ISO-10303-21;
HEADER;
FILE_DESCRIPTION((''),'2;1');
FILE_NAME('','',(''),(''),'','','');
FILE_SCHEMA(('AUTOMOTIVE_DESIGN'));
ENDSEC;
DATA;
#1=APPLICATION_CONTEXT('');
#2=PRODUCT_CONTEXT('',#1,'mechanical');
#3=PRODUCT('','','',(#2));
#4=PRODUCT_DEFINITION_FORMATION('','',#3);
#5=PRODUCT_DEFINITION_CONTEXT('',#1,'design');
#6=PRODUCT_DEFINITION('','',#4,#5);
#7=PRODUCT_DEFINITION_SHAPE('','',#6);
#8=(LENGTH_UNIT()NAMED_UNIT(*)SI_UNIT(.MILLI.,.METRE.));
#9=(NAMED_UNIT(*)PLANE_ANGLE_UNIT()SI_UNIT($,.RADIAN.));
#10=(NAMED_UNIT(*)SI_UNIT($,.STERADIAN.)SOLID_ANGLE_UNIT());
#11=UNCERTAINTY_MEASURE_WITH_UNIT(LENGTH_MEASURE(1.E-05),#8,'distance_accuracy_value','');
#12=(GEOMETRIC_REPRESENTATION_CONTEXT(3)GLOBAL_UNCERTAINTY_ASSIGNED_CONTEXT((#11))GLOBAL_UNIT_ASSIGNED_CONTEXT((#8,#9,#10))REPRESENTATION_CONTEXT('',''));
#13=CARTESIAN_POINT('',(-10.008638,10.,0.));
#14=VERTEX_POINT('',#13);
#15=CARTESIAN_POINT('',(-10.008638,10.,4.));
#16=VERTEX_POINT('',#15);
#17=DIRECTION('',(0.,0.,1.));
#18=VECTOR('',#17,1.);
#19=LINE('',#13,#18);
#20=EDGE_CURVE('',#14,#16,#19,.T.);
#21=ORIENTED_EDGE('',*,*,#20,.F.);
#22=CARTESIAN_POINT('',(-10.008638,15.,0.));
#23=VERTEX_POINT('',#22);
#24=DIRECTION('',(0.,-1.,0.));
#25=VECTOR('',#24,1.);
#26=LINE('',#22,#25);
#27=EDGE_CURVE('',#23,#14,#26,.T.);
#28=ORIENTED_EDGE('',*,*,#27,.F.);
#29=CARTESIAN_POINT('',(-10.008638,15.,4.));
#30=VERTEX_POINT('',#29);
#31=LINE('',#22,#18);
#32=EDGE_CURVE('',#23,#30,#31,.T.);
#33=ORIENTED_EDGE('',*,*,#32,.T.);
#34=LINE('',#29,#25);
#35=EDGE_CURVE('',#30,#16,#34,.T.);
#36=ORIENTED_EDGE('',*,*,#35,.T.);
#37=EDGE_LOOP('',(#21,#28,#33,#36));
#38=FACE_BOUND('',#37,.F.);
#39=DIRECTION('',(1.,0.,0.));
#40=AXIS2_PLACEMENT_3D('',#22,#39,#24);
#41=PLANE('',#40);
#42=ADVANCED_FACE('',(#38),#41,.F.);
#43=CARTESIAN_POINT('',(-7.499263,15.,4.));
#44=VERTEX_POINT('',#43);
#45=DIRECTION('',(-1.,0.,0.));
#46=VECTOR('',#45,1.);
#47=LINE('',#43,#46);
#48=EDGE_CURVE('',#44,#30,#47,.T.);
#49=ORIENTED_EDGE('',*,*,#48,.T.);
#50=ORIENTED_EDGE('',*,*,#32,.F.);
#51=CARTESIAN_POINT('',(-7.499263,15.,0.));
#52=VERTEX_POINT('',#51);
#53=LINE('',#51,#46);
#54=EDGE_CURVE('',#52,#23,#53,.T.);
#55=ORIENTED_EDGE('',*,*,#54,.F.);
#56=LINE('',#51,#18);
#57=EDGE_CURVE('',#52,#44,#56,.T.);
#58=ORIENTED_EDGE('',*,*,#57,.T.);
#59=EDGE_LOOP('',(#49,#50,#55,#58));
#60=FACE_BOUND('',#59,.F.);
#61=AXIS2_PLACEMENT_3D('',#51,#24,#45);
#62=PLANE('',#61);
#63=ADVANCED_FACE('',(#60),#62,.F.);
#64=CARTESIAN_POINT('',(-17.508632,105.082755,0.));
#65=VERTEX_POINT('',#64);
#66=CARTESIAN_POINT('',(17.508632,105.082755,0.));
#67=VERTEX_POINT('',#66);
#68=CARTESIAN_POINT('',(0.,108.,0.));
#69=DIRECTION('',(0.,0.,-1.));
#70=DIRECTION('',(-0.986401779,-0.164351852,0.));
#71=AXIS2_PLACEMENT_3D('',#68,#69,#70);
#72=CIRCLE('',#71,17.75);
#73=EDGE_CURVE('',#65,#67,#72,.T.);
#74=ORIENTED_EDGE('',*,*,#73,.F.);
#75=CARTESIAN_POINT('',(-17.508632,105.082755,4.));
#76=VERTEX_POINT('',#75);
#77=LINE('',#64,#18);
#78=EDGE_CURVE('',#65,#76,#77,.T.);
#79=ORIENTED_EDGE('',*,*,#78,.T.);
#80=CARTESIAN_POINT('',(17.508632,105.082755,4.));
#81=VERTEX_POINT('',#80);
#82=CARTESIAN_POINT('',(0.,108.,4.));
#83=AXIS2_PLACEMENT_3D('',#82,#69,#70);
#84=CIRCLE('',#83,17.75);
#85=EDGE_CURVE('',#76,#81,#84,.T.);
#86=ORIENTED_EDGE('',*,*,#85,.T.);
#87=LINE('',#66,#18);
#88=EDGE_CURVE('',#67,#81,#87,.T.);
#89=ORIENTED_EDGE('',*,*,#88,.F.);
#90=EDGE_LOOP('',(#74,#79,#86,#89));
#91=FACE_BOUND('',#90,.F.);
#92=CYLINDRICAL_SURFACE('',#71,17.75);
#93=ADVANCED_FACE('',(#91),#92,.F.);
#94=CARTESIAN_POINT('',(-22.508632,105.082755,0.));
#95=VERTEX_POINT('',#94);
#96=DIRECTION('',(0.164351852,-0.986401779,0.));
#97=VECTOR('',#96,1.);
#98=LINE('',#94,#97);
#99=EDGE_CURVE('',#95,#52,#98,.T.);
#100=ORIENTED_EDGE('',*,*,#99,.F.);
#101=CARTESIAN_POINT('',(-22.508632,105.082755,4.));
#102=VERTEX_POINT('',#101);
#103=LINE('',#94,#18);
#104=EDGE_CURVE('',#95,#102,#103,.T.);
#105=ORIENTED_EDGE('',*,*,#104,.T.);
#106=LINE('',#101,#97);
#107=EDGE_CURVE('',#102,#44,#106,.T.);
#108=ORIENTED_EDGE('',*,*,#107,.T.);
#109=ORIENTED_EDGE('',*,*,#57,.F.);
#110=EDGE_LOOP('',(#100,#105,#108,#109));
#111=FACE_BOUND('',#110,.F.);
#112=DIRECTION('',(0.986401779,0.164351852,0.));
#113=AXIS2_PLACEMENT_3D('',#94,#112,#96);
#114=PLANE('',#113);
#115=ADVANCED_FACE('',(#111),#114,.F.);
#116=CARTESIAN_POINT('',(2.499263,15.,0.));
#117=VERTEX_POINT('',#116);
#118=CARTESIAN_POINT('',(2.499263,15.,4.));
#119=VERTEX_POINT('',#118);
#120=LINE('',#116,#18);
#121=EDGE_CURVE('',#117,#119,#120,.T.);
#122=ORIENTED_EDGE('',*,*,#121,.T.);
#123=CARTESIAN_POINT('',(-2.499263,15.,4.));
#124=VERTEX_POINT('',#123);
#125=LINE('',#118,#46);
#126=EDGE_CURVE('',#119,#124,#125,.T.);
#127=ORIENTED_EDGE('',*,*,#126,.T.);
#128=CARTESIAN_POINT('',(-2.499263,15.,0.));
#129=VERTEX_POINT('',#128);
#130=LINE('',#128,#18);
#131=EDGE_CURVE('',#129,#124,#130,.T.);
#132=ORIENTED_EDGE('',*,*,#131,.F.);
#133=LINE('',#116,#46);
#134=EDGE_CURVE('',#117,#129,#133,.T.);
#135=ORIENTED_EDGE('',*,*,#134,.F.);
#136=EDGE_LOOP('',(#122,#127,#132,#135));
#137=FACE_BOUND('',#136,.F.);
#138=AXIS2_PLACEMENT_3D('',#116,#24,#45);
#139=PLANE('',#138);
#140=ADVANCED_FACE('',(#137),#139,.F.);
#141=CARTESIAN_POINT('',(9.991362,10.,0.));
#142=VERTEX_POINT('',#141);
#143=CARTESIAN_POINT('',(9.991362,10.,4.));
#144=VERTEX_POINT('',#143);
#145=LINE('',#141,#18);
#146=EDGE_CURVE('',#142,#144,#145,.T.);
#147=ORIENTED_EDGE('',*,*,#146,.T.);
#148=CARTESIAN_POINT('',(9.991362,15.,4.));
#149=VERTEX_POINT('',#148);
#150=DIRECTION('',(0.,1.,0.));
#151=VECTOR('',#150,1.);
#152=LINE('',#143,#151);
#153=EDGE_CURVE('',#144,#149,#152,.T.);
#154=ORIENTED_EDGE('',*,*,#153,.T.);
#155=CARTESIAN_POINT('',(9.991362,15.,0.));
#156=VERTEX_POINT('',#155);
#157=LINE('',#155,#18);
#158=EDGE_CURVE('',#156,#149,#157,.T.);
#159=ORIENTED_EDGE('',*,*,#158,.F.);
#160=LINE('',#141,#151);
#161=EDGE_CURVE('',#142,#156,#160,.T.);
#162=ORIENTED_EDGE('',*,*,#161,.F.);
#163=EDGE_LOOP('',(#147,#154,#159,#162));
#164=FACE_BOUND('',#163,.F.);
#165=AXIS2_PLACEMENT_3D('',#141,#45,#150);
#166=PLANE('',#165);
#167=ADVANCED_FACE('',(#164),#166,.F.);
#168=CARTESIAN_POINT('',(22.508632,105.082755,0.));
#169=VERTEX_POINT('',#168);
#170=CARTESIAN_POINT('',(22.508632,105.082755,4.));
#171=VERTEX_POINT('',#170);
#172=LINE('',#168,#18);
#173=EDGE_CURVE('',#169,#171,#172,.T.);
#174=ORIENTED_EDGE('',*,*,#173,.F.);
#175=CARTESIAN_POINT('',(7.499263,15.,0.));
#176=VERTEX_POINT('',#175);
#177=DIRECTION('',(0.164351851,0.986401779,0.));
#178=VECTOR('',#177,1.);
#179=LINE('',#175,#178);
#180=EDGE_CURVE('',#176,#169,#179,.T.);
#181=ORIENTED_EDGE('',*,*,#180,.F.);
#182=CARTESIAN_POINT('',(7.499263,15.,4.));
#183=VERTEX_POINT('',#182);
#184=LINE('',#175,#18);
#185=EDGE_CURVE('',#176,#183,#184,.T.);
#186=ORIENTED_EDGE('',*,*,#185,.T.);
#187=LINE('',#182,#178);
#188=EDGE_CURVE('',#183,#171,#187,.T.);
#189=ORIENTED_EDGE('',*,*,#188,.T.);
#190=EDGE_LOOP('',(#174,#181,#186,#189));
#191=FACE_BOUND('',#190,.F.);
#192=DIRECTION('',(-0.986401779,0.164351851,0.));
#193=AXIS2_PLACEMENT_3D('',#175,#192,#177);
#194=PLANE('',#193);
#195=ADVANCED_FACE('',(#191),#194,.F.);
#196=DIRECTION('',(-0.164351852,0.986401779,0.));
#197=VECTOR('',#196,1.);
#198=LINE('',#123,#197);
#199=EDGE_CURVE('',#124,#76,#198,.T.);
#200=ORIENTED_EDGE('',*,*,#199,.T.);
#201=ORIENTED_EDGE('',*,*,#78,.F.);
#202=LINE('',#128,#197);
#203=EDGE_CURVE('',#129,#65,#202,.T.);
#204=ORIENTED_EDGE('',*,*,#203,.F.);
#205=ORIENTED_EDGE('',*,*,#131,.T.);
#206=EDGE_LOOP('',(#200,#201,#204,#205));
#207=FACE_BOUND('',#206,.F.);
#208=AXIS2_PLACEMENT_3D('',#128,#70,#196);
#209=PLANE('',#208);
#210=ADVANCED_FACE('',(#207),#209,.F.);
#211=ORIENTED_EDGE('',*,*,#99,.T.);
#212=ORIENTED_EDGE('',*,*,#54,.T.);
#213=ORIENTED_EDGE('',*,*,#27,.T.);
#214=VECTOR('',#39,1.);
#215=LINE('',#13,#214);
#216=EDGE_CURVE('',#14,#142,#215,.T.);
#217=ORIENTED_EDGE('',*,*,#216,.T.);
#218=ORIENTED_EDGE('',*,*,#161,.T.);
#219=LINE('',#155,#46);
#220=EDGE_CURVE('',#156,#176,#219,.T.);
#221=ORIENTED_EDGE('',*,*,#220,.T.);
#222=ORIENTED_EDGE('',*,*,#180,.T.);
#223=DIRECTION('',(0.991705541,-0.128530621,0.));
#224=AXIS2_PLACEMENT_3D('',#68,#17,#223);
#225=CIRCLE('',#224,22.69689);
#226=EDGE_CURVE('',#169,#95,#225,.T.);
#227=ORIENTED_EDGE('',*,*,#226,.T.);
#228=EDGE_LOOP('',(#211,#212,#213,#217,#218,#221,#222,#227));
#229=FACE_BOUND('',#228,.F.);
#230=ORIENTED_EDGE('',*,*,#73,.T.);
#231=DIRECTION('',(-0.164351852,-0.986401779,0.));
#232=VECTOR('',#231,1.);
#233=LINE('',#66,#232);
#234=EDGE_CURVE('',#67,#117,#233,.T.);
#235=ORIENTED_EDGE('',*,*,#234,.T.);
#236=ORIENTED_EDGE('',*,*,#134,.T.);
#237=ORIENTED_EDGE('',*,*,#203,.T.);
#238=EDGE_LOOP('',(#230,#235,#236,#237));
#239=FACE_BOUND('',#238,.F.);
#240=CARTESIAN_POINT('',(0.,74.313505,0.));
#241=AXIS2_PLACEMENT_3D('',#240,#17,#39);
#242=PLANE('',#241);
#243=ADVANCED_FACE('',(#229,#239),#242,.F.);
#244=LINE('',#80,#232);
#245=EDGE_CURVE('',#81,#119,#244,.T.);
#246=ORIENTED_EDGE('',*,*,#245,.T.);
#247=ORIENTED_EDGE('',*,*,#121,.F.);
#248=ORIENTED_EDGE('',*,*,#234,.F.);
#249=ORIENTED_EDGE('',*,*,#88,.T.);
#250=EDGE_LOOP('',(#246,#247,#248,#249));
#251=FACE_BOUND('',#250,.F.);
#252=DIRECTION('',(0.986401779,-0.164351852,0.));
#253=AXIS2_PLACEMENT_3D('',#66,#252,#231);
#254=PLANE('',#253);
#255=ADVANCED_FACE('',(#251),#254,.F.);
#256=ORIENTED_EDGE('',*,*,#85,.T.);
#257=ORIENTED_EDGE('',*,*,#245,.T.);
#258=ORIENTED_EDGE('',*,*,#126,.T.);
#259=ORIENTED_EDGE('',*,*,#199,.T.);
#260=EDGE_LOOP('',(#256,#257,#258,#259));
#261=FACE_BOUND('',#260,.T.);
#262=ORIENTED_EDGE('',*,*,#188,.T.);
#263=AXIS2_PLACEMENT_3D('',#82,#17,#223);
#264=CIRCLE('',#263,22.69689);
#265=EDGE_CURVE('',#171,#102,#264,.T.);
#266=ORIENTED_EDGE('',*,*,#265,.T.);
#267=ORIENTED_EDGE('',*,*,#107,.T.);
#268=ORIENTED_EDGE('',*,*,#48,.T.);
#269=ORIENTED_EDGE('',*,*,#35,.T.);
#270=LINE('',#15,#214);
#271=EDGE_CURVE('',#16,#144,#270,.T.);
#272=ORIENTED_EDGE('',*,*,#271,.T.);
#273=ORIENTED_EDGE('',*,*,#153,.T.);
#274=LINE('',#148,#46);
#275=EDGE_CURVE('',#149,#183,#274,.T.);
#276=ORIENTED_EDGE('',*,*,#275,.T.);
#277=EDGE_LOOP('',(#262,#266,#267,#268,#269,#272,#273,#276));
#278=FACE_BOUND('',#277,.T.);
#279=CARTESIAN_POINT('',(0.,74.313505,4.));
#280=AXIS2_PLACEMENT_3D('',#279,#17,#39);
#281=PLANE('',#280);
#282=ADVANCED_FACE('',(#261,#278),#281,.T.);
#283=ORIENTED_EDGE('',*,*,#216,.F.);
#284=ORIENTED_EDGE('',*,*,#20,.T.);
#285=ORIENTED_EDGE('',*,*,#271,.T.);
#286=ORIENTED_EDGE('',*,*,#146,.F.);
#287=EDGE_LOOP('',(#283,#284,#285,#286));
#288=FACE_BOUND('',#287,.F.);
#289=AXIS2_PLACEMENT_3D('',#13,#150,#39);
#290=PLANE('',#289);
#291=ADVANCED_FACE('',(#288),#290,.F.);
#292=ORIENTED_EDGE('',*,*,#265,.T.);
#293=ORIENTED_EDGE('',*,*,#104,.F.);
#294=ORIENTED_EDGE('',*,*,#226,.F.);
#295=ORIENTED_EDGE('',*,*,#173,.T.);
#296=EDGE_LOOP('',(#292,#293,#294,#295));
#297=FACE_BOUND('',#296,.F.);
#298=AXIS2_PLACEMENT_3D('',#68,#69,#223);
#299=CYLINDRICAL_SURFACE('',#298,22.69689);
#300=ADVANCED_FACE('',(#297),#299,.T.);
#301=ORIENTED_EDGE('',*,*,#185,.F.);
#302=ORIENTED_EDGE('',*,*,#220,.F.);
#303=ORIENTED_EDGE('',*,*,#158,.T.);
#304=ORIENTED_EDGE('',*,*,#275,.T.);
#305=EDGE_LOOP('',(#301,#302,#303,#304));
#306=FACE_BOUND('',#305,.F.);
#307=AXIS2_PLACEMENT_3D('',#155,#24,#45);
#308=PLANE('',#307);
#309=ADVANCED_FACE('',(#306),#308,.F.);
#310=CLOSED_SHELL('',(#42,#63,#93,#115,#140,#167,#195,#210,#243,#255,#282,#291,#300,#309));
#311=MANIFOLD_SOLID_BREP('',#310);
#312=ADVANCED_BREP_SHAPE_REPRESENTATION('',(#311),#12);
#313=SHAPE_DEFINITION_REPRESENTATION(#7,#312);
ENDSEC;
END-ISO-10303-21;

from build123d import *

# Parameters (mm, degrees)
F1_DEPTH = 4


# Not quite as in the source:
# - ends of sketch curves that miss each other by under 0.0002 mm in the source are joined


with BuildPart() as f1:
    # F0 (on Top) → F1 (new body)
    with BuildSketch(Plane.XY):
        with BuildLine():
            Line((-2.4992633137, 15), (-17.5086315699, 105.0827546296))
            ThreePointArc((-17.5086315699, 105.0827546296), (0, 125.75), (17.5086315699, 105.0827546296))
            Line((17.5086315699, 105.0827546296), (2.4992633137, 15))
            Line((2.4992633137, 15), (7.4992633137, 14.9999997765))
            Line((7.4992633137, 14.9999997765), (22.5086315699, 105.0827546296))
            ThreePointArc((22.5086315699, 105.0827546296), (0, 130.6968900006), (-22.5086315699, 105.0827546296))
            Line((-22.5086315699, 105.0827546296), (-7.4992633137, 15))
            Line((-7.4992633137, 15), (-2.4992633137, 15))
        make_face()
        Polygon((2.4992633137, 14.9999997765), (-2.4992633137, 14.9999997765), (-7.4992633137, 14.9999997765), (-10.0086377934, 14.9999997765), (-10.0086377934, 9.9999997765), (9.9913622066, 9.9999997765), (9.9913622066, 14.9999997765), (7.4992633137, 14.9999997765), align=None)
    extrude(amount=F1_DEPTH)


solid = f1.part
